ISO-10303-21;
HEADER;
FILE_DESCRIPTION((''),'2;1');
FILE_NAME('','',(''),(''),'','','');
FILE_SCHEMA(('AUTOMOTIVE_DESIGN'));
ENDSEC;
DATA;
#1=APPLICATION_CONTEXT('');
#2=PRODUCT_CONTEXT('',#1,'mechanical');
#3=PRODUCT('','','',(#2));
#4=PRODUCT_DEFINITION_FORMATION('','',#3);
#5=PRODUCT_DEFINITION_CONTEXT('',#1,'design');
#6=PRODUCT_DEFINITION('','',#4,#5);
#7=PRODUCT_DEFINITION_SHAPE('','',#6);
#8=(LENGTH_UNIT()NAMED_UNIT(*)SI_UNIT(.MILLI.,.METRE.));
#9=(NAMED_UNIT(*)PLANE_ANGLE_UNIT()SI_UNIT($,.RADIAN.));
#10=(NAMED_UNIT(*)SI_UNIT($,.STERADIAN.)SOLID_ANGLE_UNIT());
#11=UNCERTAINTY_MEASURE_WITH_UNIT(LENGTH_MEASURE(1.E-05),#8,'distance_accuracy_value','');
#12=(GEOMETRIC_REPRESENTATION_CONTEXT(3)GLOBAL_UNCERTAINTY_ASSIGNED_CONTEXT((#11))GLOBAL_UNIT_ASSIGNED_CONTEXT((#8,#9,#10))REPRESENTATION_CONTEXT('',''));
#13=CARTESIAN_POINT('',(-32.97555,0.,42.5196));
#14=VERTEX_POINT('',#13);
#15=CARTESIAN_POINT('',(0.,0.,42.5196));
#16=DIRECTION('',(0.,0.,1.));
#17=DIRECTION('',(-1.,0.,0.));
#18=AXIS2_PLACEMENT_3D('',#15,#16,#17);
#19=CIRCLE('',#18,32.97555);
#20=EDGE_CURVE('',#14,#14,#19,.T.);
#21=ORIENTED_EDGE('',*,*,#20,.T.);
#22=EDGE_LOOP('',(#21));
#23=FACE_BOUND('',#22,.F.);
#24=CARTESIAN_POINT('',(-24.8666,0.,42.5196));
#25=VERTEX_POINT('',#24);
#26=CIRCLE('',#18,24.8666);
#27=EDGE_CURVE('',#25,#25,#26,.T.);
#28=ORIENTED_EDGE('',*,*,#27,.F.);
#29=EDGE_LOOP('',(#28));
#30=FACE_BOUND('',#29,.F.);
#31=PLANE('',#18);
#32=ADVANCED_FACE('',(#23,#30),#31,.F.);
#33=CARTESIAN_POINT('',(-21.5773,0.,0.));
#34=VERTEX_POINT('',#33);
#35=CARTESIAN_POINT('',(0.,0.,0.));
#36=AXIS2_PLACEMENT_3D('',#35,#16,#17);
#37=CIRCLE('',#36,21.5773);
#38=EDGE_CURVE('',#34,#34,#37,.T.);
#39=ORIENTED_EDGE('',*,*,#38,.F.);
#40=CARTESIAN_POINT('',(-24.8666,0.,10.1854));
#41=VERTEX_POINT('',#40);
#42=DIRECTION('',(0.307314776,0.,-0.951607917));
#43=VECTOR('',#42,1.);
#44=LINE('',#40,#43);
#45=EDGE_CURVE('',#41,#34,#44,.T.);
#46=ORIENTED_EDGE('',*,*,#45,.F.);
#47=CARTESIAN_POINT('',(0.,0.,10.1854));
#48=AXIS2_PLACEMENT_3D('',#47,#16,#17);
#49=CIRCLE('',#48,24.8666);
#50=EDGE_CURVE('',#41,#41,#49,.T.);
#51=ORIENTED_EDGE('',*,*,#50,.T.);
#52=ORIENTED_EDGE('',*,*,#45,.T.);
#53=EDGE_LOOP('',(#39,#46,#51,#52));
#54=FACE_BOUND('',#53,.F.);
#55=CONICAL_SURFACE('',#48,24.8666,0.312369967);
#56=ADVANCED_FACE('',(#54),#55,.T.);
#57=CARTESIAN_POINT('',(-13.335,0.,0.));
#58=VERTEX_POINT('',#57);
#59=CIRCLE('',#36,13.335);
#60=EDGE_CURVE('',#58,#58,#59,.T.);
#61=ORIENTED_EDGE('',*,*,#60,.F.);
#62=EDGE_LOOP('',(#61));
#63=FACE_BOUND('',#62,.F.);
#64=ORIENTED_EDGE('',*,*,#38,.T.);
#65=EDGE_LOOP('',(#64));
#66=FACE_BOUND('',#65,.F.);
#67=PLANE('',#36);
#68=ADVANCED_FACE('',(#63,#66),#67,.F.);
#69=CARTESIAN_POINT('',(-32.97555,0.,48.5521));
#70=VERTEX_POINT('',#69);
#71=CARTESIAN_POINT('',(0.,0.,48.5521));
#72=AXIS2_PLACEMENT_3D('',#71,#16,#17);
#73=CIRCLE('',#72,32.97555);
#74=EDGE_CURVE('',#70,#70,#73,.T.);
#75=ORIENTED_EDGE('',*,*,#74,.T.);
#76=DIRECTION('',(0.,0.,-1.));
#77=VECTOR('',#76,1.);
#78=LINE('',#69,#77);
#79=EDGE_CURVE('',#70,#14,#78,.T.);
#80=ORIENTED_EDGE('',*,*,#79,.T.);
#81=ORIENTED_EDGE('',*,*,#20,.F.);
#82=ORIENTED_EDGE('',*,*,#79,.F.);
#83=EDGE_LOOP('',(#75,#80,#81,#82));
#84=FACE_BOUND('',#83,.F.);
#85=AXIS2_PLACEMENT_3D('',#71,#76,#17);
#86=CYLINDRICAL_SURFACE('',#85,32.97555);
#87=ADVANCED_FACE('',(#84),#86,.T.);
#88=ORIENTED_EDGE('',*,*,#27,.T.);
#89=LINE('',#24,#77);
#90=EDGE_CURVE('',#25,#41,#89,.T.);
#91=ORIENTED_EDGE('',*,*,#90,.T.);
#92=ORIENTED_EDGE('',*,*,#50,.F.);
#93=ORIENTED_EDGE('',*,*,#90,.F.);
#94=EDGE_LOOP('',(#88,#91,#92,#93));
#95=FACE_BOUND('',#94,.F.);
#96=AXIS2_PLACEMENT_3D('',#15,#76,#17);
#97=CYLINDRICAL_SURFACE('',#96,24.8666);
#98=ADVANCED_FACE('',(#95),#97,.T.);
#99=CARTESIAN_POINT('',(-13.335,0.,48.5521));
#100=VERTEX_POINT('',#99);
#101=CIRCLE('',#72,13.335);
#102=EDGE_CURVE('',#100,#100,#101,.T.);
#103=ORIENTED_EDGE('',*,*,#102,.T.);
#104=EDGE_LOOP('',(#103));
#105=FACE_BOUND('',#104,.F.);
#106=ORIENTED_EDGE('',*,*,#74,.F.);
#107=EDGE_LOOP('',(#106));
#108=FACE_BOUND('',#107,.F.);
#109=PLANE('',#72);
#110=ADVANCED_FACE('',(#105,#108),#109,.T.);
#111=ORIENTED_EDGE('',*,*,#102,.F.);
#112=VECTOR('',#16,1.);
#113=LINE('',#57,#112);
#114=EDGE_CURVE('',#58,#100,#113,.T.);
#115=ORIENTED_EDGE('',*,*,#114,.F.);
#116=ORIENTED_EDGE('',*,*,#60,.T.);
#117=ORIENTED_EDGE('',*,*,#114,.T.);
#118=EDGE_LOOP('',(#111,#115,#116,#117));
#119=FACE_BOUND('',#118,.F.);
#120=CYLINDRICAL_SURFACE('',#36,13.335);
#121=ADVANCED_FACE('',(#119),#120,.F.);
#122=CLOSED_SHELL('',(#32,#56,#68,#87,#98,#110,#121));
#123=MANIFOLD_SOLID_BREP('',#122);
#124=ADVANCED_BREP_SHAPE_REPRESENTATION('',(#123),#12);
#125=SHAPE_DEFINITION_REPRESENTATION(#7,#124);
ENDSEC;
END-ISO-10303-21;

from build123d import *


# Not quite as in the source:
# - a feature names something its author has since deleted; it is built from what else it names


with BuildPart() as f1:
    # F0 (on Front) → F1 (revolve)
    with BuildSketch(Plane.XZ):
        Polygon((-13.335, 48.5521), (-32.97555, 48.5521), (-32.97555, 42.5196), (-24.8666, 42.5196), (-24.8666, 10.1854), (-21.5773, 0), (-13.335, 0), align=None)
    revolve(axis=Axis((0, 0, 24.27605), (0, 0, 1)))


solid = f1.part
